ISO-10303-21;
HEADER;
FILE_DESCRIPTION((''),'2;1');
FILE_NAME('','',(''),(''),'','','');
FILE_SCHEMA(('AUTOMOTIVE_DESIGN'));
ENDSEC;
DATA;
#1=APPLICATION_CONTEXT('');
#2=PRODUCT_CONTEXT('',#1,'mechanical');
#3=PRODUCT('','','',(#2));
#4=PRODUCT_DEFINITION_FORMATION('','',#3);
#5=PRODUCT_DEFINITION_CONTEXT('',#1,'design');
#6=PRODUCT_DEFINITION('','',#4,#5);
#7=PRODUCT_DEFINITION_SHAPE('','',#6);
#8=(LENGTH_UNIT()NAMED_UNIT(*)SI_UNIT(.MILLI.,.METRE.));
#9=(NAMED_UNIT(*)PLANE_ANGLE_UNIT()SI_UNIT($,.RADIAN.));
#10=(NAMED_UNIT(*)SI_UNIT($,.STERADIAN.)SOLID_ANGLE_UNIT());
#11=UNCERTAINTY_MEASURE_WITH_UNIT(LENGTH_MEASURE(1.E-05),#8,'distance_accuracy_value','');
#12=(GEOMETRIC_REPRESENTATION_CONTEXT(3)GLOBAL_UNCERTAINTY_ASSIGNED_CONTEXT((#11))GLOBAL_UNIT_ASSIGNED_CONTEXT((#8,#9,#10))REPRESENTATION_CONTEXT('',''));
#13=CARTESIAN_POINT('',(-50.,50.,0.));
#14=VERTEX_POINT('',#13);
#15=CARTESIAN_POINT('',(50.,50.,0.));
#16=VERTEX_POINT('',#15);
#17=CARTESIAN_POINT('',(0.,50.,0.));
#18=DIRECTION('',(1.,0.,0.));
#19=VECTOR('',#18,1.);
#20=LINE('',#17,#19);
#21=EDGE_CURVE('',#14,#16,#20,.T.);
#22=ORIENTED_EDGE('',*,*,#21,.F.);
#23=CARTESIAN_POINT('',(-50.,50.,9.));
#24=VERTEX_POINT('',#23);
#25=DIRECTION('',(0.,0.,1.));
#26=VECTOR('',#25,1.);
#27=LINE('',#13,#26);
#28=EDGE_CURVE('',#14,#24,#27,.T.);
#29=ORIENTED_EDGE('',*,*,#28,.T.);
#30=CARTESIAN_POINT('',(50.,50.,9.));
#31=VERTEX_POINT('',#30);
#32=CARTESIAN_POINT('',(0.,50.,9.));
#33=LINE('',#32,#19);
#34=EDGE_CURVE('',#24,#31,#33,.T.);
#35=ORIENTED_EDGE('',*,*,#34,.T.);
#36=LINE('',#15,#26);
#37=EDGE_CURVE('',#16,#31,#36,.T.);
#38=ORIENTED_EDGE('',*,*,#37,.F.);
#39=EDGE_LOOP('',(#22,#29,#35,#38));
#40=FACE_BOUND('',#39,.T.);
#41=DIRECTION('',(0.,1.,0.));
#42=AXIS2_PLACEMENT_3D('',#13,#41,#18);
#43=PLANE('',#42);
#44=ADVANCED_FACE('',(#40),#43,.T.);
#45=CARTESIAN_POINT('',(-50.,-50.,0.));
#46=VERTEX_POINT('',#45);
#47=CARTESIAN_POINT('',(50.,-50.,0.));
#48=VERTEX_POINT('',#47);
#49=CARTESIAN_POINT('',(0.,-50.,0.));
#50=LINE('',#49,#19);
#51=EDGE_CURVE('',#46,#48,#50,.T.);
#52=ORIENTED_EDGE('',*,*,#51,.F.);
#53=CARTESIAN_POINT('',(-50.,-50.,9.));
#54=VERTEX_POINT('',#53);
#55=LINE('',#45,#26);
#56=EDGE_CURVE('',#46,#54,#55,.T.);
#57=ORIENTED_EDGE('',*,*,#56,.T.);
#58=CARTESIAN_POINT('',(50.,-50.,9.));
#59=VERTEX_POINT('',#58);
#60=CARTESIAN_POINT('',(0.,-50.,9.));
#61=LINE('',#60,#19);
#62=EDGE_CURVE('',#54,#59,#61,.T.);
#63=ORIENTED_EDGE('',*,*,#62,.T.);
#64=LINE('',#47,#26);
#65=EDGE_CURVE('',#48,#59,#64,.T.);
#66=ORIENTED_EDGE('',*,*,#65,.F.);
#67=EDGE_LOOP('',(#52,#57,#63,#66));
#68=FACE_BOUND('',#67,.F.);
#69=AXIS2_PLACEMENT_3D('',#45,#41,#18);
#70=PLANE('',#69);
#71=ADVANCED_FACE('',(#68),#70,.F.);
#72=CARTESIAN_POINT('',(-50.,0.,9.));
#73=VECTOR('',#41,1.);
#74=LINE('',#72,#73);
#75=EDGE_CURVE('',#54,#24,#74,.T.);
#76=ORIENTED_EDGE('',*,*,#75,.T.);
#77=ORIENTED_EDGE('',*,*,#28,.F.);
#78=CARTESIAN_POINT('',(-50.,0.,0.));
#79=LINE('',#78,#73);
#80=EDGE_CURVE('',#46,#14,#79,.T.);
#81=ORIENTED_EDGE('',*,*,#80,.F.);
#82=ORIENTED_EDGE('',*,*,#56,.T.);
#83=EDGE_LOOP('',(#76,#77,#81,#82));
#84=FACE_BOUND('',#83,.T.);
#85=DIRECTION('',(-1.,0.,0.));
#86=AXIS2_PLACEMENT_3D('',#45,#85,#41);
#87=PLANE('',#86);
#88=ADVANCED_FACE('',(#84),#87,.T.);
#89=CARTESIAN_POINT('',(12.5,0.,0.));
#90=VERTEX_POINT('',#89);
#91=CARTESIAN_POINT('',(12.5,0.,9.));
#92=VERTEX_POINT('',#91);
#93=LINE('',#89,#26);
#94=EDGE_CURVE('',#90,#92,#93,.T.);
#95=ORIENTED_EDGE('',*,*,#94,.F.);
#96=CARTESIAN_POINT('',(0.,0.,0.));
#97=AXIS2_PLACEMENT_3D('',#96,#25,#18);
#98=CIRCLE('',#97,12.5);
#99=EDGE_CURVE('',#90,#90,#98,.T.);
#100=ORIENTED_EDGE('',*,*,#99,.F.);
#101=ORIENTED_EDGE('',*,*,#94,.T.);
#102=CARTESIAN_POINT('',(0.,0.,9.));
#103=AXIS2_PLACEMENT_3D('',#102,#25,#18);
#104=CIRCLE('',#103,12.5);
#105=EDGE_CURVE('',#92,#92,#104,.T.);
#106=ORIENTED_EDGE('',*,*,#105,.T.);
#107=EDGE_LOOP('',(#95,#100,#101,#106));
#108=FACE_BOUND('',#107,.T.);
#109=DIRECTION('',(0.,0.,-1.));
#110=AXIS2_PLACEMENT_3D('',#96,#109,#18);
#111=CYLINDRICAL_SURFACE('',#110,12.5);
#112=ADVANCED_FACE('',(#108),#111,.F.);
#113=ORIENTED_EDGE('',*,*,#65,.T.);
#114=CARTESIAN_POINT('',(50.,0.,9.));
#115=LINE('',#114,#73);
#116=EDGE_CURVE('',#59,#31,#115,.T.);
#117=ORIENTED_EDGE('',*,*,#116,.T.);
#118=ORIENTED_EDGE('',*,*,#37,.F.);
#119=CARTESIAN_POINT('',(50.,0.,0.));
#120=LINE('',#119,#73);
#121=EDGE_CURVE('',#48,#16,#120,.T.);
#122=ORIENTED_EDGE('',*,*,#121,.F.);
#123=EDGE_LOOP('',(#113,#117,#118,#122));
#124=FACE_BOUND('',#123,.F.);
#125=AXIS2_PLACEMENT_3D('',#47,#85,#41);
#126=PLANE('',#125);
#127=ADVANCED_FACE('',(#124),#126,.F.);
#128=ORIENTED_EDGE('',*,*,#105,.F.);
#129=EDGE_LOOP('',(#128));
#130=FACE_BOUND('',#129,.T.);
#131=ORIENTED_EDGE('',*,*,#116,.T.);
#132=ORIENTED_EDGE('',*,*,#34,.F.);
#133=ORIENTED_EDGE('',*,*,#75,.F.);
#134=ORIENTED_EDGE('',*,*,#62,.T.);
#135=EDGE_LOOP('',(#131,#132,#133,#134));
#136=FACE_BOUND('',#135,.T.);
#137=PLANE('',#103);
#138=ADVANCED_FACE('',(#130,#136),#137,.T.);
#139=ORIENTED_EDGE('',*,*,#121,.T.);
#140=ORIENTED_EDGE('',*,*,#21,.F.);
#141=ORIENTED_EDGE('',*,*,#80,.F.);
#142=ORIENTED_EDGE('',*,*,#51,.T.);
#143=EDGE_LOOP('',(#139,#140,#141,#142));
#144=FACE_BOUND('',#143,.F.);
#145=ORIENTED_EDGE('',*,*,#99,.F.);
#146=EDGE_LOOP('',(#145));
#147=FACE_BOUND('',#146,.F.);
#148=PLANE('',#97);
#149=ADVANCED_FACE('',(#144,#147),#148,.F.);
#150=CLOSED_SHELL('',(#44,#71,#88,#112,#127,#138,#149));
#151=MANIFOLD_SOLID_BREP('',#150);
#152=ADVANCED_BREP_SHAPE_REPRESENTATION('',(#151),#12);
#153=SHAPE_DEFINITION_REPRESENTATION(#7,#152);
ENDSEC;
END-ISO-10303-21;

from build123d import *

# Parameters (mm, degrees)
F0_W     = 100
F0_H     = 100
F0_R     = 12.5
F1_DEPTH = 9


# Not quite as in the source:
# - a feature names something its author has since deleted; it is built from what else it names


with BuildPart() as f1:
    # F0 (on Top) → F1 (new body)
    with BuildSketch(Plane.XY):
        Rectangle(F0_W, F0_H)
        Circle(F0_R, mode=Mode.SUBTRACT)
    extrude(amount=F1_DEPTH)


solid = f1.part
